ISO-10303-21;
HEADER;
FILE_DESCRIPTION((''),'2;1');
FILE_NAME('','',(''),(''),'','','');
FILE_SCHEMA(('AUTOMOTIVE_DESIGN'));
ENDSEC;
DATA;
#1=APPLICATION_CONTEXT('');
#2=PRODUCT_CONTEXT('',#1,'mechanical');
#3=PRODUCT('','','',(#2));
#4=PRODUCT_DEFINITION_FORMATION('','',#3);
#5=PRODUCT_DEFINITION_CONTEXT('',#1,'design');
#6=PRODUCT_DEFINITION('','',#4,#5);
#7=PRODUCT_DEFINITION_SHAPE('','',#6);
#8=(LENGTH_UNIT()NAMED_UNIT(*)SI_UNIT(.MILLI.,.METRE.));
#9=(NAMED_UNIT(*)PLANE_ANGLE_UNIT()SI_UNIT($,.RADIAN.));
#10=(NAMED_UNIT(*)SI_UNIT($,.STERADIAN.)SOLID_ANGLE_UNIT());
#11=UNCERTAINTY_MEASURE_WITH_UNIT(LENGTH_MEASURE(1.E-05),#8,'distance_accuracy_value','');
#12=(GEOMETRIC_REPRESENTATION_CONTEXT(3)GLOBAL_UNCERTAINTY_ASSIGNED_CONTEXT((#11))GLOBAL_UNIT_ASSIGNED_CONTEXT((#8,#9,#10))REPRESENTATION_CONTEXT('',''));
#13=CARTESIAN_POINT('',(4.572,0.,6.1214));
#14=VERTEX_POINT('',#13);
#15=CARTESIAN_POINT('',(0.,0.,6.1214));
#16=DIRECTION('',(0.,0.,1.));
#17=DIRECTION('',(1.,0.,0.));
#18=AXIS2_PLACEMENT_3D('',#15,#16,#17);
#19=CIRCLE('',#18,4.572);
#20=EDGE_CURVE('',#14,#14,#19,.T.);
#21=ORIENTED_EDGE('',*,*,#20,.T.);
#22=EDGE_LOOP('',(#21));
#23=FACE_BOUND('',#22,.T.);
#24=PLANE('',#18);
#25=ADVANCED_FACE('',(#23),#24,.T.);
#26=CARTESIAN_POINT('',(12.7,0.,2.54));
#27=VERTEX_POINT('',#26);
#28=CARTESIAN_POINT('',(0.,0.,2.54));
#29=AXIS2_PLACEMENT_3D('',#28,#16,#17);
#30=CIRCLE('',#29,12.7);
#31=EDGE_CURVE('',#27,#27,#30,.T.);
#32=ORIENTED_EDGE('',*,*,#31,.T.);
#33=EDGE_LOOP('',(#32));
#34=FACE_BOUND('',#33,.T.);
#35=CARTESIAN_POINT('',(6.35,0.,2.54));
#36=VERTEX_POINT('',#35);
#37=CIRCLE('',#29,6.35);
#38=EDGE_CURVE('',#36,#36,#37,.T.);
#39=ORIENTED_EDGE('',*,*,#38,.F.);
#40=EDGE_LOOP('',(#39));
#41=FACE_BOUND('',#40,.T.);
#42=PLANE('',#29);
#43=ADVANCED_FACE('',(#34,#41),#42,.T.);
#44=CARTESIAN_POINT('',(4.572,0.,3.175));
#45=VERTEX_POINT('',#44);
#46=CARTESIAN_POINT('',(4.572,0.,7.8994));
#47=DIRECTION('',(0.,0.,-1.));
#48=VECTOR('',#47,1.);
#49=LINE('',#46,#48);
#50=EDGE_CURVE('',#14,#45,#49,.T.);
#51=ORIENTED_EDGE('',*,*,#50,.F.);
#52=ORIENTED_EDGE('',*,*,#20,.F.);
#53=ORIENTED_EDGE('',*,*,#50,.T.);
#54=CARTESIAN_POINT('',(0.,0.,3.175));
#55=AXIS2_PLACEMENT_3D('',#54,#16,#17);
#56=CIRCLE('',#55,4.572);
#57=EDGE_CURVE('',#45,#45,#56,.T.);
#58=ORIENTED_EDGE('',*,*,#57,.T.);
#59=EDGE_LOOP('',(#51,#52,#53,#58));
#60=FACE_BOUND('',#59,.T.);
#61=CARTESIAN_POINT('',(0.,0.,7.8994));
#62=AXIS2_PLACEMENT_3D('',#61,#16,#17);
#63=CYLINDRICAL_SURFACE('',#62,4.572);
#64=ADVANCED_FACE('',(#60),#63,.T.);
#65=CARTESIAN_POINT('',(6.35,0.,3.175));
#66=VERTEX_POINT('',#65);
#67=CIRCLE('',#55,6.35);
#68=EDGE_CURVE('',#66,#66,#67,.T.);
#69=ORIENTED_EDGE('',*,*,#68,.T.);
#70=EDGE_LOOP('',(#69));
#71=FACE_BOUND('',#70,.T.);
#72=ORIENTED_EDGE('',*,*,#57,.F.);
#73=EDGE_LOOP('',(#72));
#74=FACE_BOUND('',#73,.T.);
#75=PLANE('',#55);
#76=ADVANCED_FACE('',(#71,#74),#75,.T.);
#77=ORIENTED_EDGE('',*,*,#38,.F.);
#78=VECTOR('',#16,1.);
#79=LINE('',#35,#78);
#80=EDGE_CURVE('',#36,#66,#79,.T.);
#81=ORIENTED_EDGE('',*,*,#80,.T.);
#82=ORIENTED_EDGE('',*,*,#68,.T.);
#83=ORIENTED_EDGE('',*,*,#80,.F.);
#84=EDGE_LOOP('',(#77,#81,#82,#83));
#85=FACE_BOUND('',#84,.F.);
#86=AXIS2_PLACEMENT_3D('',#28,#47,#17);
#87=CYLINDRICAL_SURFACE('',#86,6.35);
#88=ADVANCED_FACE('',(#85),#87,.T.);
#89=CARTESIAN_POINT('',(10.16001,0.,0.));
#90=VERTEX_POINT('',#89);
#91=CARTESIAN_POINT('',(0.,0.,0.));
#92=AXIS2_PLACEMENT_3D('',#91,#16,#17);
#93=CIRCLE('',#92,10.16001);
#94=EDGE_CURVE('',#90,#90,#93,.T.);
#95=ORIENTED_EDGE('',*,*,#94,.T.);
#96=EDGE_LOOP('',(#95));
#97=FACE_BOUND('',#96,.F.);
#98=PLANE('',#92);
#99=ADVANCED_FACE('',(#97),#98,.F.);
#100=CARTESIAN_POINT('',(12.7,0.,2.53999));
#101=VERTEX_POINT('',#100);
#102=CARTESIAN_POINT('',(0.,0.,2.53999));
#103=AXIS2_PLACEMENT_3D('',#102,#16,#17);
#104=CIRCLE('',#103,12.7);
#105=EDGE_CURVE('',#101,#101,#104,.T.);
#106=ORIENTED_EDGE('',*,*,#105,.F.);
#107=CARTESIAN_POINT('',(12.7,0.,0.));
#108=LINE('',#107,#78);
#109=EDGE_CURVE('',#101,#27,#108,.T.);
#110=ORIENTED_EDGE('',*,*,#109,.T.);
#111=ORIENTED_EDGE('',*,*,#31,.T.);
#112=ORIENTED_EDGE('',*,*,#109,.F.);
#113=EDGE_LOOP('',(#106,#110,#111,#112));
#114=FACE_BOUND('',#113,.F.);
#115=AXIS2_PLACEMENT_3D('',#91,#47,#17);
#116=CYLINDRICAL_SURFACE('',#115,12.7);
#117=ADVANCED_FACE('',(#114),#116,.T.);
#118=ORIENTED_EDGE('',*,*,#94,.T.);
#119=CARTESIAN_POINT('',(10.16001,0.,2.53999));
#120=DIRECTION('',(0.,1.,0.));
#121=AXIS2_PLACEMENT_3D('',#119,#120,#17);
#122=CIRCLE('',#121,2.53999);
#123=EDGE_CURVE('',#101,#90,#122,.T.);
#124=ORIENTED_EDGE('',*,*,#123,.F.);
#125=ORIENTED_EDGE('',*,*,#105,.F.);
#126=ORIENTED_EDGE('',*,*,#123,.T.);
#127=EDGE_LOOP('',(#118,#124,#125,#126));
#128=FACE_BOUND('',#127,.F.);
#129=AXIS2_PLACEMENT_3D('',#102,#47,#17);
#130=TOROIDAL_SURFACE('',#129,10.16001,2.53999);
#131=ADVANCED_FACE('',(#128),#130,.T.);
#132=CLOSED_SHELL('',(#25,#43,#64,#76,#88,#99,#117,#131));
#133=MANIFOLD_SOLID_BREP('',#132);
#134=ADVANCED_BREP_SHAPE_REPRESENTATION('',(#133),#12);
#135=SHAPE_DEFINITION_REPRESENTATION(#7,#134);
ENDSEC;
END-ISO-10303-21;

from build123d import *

# Parameters (mm, degrees)
F0_R      = 12.7
F1_DEPTH  = 2.54
F2_R      = 2.53999
F3_R      = 6.35
F4_DEPTH  = 0.635
F5_R      = 4.7625
F6_DEPTH  = 4.7244
F7_R      = 4.7625
F7_R_2    = 4.572
F8_DEPTH  = 4.7244
F9_R      = 4.572
F10_DEPTH = 1.778


# Not quite as in the source:
# - a fillet or chamfer is up to 0.001 mm smaller than in the source, because OpenCascade refuses the exact size


with BuildPart() as f1:
    # F0 (on Top) → F1 (new body)
    with BuildSketch(Plane.XY):
        Circle(F0_R)
    extrude(amount=F1_DEPTH)

    # F2 (radius 2.54 in the source; OpenCascade refuses exactly that, so slightly less here)
    f2_edges = [f1.edges().sort_by_distance(p)[0] for p in [
        (-12.7, 0, 0),
    ]]
    fillet(f2_edges, radius=F2_R)

    # F3 (on face) → F4 (join)
    with BuildSketch(Plane.XY.offset(2.54)):
        Circle(F3_R)
    extrude(amount=F4_DEPTH)

    # F5 (on face) → F6 (join)
    with BuildSketch(Plane.XY.offset(3.175)):
        Circle(F5_R)
    extrude(amount=F6_DEPTH)

    # F7 (on face) → F8 (cut, through all)
    with BuildSketch(Plane.XY.offset(7.8994)):
        Circle(F7_R)
        Circle(F7_R_2, mode=Mode.SUBTRACT)
    extrude(amount=-F8_DEPTH, mode=Mode.SUBTRACT)

    # F9 (on face) → F10 (cut)
    with BuildSketch(Plane.XY.offset(7.8994)):
        Circle(F9_R)
    extrude(amount=-F10_DEPTH, mode=Mode.SUBTRACT)


solid = f1.part
